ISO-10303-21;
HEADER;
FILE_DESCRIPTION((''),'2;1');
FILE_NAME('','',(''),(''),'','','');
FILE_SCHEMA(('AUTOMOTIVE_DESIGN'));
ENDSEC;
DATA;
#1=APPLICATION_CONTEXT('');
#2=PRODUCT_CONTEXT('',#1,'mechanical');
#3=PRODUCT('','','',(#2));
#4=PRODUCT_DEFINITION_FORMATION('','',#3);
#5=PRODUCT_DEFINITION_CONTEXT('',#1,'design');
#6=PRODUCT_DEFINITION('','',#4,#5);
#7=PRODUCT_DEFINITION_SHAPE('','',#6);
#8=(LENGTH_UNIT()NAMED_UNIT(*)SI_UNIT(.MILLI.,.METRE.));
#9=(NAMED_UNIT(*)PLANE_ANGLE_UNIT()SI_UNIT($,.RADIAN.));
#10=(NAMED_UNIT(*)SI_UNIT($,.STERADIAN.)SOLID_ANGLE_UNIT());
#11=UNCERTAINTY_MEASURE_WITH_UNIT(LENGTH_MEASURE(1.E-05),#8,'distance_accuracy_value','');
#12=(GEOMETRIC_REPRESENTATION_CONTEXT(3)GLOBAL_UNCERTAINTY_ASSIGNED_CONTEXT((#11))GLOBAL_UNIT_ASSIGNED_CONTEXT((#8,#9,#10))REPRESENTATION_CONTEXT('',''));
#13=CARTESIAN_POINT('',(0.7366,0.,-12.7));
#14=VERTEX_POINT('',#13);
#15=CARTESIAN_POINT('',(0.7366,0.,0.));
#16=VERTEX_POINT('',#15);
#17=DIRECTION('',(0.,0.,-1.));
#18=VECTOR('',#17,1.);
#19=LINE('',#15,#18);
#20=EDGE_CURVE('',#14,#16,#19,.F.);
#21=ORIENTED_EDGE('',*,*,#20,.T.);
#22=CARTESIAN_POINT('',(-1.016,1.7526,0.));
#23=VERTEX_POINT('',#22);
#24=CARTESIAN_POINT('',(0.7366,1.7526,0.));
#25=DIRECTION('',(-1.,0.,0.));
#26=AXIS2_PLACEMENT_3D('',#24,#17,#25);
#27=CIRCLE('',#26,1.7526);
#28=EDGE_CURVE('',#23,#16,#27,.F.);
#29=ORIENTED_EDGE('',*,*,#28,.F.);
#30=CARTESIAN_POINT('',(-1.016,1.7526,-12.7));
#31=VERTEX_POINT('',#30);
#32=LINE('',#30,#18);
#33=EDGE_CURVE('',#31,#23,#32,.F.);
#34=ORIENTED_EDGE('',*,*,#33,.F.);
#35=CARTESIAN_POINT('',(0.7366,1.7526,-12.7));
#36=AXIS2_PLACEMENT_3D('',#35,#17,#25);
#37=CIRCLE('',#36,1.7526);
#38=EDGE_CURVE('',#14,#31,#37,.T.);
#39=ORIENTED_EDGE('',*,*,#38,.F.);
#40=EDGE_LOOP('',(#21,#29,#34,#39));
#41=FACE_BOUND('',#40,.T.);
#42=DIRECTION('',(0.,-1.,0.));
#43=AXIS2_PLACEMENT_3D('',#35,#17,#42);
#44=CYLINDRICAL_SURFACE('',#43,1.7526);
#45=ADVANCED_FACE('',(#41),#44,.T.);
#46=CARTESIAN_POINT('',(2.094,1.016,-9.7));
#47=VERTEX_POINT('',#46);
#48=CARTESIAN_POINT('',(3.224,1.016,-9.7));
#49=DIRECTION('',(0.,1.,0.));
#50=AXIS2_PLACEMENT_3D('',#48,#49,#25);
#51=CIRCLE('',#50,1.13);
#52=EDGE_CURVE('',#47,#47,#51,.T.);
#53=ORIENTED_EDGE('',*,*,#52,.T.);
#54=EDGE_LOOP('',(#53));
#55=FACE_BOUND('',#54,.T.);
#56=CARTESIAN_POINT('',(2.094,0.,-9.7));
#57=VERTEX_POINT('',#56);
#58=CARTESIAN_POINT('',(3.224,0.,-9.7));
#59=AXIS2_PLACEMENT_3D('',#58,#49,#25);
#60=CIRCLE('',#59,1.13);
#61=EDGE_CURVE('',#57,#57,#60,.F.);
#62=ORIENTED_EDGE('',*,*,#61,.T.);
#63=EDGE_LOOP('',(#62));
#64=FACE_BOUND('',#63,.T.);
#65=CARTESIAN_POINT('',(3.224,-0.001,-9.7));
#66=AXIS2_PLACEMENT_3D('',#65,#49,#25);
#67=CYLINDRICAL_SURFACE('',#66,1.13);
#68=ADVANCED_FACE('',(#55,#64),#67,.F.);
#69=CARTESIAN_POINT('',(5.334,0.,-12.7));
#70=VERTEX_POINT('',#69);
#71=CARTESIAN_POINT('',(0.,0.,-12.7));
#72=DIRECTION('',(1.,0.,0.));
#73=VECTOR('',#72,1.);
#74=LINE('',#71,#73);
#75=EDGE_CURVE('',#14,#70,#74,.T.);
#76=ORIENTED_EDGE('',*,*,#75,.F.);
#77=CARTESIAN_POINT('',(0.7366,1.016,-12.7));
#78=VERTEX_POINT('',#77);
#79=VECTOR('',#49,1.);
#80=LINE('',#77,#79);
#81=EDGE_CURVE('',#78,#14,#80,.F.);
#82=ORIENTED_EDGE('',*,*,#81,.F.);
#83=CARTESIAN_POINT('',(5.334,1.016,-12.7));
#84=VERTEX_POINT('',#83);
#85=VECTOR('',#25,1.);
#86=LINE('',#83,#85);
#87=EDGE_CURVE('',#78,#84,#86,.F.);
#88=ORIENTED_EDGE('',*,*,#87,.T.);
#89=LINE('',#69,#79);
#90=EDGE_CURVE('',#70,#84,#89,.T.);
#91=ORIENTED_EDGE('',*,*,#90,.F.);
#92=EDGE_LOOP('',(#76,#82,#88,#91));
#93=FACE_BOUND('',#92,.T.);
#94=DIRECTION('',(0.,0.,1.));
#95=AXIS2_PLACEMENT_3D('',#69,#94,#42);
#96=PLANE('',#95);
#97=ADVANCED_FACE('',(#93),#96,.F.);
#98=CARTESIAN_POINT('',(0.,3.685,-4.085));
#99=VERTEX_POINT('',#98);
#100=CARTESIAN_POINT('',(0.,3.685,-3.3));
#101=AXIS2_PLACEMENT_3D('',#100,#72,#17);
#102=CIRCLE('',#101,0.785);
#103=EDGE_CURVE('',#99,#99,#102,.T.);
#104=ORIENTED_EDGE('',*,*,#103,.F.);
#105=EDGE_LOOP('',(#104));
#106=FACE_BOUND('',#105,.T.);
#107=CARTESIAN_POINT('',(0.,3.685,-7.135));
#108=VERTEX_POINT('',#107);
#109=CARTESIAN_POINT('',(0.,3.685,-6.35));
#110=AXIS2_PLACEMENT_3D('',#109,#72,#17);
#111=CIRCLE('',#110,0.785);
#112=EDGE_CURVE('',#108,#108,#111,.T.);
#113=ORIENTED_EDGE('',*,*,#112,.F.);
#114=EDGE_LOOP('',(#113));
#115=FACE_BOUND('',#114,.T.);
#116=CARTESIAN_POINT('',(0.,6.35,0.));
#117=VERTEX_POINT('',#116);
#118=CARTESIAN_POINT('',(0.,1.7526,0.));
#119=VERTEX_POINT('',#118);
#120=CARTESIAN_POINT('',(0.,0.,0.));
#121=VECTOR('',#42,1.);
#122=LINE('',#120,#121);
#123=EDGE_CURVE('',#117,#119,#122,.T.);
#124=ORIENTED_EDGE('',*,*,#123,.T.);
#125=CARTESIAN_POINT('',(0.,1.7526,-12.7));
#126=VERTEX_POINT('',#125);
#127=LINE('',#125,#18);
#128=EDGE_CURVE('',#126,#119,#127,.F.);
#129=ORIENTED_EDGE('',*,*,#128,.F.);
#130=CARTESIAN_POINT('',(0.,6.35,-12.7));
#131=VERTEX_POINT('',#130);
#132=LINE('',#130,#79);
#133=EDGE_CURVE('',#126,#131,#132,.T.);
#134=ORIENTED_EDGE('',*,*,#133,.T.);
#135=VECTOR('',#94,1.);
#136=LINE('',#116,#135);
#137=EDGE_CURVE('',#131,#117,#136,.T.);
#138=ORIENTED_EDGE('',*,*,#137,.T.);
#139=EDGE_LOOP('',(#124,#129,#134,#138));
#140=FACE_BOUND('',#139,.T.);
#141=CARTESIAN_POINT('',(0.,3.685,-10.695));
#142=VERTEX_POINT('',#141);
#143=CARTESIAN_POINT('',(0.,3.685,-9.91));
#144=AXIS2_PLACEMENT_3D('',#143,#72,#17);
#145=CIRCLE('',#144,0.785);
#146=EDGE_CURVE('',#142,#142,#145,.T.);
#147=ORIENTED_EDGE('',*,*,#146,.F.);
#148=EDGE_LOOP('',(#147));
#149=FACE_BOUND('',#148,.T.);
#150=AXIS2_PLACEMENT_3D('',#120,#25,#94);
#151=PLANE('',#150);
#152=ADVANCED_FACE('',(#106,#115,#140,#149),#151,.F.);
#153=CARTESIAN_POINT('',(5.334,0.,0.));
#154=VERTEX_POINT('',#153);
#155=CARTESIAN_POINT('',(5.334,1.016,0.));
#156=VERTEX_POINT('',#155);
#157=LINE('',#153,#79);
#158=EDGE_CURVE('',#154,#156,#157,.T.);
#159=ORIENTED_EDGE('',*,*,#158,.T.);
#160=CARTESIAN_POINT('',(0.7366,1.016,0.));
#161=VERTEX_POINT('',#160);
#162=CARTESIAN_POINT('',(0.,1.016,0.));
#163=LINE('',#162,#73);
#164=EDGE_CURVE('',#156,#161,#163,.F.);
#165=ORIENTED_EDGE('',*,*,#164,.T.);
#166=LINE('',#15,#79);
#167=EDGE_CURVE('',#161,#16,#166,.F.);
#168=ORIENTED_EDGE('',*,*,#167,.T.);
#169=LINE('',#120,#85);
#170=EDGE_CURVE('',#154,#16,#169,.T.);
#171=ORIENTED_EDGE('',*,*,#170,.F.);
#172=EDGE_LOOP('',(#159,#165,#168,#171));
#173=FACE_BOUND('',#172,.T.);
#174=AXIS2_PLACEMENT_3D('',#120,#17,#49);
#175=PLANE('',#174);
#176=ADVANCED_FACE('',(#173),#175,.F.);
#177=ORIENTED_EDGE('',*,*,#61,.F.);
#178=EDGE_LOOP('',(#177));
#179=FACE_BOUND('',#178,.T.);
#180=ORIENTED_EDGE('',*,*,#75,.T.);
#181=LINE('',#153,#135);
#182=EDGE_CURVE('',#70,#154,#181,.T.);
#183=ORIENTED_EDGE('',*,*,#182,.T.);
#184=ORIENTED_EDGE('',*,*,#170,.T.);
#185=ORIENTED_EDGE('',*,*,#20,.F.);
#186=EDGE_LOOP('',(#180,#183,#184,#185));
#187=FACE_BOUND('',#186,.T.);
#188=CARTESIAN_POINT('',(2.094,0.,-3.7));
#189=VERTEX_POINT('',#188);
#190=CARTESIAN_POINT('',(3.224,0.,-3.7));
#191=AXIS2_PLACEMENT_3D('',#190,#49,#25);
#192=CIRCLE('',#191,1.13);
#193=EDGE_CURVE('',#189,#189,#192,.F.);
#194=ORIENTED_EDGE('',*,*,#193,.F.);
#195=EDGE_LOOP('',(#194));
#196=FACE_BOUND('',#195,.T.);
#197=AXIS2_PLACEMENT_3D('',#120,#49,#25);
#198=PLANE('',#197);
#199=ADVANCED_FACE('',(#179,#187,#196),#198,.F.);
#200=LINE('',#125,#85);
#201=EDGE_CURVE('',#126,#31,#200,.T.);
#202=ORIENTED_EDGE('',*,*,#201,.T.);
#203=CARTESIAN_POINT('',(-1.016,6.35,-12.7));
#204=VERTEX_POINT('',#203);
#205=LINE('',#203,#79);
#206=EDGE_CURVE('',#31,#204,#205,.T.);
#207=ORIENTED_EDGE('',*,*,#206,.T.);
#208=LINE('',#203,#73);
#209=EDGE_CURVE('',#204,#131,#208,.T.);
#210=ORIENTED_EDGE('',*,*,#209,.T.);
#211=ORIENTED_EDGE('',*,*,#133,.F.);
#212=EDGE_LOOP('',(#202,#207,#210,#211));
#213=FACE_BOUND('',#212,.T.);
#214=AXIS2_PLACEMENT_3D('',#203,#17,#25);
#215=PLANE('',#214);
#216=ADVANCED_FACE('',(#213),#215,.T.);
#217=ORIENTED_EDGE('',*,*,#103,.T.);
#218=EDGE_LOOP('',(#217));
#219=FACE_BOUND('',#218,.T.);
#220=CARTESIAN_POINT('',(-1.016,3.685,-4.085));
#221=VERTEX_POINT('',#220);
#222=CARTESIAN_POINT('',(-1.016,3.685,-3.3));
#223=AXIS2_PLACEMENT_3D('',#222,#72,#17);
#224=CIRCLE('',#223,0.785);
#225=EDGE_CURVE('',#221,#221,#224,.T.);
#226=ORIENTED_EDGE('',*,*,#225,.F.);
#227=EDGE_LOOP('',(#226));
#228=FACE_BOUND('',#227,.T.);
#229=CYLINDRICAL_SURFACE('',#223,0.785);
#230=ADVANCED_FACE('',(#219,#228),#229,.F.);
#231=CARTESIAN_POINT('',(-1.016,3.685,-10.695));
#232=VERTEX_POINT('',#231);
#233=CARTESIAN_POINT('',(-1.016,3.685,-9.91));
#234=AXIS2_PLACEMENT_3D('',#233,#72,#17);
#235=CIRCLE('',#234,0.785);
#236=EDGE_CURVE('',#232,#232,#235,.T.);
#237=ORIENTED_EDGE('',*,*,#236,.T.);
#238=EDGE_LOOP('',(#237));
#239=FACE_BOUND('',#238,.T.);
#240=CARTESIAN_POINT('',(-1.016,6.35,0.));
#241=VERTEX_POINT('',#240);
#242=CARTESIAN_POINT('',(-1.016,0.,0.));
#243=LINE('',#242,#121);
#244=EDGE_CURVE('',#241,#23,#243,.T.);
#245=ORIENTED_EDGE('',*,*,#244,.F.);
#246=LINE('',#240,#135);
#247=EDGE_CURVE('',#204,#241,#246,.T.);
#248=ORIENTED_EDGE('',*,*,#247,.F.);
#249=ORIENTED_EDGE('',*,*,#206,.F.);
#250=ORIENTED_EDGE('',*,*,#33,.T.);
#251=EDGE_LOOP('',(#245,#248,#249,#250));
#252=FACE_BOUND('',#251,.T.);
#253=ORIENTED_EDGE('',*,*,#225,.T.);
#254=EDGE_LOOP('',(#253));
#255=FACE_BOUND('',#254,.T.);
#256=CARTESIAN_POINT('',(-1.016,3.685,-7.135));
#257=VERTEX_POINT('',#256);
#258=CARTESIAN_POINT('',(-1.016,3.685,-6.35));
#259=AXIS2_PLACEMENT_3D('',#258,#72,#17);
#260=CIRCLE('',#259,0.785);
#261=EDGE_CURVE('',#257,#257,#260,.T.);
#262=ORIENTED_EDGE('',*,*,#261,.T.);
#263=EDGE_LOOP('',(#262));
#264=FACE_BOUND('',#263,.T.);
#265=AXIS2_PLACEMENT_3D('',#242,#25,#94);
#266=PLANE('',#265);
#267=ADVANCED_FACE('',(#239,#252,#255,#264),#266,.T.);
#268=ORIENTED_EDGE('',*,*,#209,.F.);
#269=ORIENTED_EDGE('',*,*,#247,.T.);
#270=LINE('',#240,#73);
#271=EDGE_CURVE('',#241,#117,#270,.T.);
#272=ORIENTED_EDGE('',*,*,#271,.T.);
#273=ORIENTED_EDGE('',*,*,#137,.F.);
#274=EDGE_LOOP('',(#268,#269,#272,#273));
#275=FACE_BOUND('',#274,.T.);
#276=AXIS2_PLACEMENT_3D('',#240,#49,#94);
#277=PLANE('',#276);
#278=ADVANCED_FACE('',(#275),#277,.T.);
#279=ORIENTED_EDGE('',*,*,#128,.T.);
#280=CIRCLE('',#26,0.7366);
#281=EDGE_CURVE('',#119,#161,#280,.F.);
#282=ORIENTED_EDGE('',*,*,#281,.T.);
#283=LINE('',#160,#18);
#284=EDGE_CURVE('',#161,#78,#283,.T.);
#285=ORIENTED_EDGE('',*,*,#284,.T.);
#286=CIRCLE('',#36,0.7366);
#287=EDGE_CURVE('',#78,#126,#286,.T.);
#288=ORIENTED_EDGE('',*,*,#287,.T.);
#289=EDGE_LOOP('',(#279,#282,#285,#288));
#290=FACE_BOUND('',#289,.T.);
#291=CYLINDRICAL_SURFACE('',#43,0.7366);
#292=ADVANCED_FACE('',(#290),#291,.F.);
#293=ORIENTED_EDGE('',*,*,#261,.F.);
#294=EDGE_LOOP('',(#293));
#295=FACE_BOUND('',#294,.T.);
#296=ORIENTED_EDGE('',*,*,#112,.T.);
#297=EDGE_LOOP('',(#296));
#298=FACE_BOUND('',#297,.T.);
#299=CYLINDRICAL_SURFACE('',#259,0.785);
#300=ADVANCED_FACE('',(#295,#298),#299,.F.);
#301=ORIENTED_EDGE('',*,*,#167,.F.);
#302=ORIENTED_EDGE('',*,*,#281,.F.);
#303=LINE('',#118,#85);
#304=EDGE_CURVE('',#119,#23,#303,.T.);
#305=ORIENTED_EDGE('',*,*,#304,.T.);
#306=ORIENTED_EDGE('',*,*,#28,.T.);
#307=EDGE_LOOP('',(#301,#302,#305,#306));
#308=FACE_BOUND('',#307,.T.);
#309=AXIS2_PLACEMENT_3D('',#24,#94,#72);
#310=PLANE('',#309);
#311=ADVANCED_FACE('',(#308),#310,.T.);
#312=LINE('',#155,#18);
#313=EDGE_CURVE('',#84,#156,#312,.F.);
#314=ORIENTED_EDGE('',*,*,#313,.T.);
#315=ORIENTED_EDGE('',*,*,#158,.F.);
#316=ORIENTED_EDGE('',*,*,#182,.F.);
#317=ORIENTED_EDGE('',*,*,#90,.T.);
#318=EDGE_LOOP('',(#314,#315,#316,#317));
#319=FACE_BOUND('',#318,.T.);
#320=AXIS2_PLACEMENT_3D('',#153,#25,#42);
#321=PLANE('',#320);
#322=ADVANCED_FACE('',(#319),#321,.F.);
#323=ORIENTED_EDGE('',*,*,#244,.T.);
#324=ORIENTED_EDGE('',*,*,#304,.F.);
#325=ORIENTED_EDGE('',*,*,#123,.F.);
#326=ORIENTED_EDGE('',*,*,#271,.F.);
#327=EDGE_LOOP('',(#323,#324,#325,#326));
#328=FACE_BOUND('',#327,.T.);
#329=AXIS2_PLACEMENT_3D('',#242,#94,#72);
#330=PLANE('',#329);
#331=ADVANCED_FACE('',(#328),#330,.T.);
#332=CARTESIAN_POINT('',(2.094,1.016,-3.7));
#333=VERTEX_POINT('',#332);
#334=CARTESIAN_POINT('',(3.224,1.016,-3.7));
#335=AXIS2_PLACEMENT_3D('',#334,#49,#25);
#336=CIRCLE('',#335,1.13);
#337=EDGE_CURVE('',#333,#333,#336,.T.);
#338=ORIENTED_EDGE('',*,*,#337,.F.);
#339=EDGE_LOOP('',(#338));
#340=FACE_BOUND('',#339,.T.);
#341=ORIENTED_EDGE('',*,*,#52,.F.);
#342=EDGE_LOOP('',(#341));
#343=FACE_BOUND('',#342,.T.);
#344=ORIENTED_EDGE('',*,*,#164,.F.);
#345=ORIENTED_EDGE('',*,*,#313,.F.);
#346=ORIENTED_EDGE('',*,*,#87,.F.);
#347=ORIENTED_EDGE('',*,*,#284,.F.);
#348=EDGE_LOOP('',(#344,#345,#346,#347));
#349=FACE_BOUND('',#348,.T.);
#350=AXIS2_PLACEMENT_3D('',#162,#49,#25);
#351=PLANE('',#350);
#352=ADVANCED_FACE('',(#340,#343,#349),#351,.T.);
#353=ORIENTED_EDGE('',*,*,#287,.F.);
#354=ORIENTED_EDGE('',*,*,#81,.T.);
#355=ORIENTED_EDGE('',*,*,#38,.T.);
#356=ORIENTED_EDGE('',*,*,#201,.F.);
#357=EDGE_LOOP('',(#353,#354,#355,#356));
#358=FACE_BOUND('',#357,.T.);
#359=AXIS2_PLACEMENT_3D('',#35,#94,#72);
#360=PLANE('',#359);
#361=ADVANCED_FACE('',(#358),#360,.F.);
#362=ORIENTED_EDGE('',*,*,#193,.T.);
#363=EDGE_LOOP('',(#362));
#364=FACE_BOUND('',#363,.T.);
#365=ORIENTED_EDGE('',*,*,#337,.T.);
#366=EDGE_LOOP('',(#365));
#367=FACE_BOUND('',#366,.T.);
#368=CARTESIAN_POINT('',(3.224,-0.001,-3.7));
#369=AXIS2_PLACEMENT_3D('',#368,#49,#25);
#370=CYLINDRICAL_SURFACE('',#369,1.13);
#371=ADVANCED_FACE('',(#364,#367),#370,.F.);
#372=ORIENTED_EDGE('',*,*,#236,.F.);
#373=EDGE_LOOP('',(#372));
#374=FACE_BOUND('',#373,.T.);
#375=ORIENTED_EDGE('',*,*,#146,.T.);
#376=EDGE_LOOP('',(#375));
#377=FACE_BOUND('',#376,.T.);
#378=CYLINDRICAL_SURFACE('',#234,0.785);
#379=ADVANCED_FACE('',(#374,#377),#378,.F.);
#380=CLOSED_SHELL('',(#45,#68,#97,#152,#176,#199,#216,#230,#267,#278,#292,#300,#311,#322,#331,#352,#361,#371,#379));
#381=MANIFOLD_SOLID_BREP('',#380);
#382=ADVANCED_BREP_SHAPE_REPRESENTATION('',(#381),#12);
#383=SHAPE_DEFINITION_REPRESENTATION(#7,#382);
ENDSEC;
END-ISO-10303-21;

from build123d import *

# Parameters (mm, degrees)
SKETCH1_W                    = 12.7
SKETCH1_H                    = 6.35
SKETCH1_R                    = 0.785
BASE_FLANGE1_DEPTH           = 1.016
EDGE_FLANGE1_STRIP_W         = 5.5372
EDGE_FLANGE1_STRIP_H         = 1.016
EDGE_FLANGE1_STRIP_CUT_DEPTH = 12.7
EDGE_FLANGE1_DEPTH           = 12.7
CUT_EXTRUDE1_REACH           = 16.771
SKETCH9_R                    = 1.13


# Sheet-metal steps are written as plain solids
with BuildPart() as part:
    # Sketch1 → Base-Flange1 (new body)
    with BuildSketch(Plane(origin=(0, 0, 0), x_dir=(0, 0, -1), z_dir=(1, 0, 0))):
        with Locations((6.35, 3.175)):
            Rectangle(SKETCH1_W, SKETCH1_H)
        with Locations((3.3, 3.685)):
            Circle(SKETCH1_R, mode=Mode.SUBTRACT)
        with Locations((6.35, 3.685)):
            Circle(SKETCH1_R, mode=Mode.SUBTRACT)
        with Locations((9.91, 3.685)):
            Circle(SKETCH1_R, mode=Mode.SUBTRACT)
    extrude(amount=-BASE_FLANGE1_DEPTH)

    # Edge-Flange1 strip (across the edge) → Edge-Flange1 strip cut (cut)
    with BuildSketch(Plane.YX):
        with Locations((-1.016, -0.508)):
            Rectangle(EDGE_FLANGE1_STRIP_W, EDGE_FLANGE1_STRIP_H)
    extrude(amount=EDGE_FLANGE1_STRIP_CUT_DEPTH, mode=Mode.SUBTRACT)

    # Edge-Flange1 section (across the edge) → Edge-Flange1 (add)
    with BuildSketch(Plane.YX):
        with BuildLine():
            Line((0, 0.7366), (0, 5.334))
            Line((0, 5.334), (1.016, 5.334))
            Line((1.016, 5.334), (1.016, 0.7366))
            ThreePointArc((1.016, 0.7366), (1.231745145, 0.215745145), (1.7526, 0))
            Line((1.7526, 0), (1.7526, -1.016))
            ThreePointArc((1.7526, -1.016), (0.513324655, -0.502675345), (0, 0.7366))
        make_face()
    extrude(amount=EDGE_FLANGE1_DEPTH)

    # Sketch9 → Cut-Extrude1 (cut, up to next)
    with BuildSketch(Plane(origin=(0, 1.016, 0), x_dir=(1, 0, 0), z_dir=(0, 1, 0)), mode=Mode.PRIVATE) as cut_extrude1_sk1:
        with Locations(Location((3.224, 3.7, 0), (0, 0, 180))):
            Circle(SKETCH9_R)
    cut_extrude1_tool1 = extrude(cut_extrude1_sk1.sketch, amount=-CUT_EXTRUDE1_REACH, mode=Mode.PRIVATE) & part.part
    # Sketch9 → Cut-Extrude1 (cut, up to next)
    with BuildSketch(Plane(origin=(0, 1.016, 0), x_dir=(1, 0, 0), z_dir=(0, 1, 0)), mode=Mode.PRIVATE) as cut_extrude1_sk2:
        with Locations(Location((3.224, 9.7, 0), (0, 0, 180))):
            Circle(SKETCH9_R)
    cut_extrude1_tool2 = extrude(cut_extrude1_sk2.sketch, amount=-CUT_EXTRUDE1_REACH, mode=Mode.PRIVATE) & part.part
    add(cut_extrude1_tool1.solids().sort_by_distance((3.224, 1.016, -3.7))[0], mode=Mode.SUBTRACT)
    add(cut_extrude1_tool2.solids().sort_by_distance((3.224, 1.016, -9.7))[0], mode=Mode.SUBTRACT)


solid = part.part
